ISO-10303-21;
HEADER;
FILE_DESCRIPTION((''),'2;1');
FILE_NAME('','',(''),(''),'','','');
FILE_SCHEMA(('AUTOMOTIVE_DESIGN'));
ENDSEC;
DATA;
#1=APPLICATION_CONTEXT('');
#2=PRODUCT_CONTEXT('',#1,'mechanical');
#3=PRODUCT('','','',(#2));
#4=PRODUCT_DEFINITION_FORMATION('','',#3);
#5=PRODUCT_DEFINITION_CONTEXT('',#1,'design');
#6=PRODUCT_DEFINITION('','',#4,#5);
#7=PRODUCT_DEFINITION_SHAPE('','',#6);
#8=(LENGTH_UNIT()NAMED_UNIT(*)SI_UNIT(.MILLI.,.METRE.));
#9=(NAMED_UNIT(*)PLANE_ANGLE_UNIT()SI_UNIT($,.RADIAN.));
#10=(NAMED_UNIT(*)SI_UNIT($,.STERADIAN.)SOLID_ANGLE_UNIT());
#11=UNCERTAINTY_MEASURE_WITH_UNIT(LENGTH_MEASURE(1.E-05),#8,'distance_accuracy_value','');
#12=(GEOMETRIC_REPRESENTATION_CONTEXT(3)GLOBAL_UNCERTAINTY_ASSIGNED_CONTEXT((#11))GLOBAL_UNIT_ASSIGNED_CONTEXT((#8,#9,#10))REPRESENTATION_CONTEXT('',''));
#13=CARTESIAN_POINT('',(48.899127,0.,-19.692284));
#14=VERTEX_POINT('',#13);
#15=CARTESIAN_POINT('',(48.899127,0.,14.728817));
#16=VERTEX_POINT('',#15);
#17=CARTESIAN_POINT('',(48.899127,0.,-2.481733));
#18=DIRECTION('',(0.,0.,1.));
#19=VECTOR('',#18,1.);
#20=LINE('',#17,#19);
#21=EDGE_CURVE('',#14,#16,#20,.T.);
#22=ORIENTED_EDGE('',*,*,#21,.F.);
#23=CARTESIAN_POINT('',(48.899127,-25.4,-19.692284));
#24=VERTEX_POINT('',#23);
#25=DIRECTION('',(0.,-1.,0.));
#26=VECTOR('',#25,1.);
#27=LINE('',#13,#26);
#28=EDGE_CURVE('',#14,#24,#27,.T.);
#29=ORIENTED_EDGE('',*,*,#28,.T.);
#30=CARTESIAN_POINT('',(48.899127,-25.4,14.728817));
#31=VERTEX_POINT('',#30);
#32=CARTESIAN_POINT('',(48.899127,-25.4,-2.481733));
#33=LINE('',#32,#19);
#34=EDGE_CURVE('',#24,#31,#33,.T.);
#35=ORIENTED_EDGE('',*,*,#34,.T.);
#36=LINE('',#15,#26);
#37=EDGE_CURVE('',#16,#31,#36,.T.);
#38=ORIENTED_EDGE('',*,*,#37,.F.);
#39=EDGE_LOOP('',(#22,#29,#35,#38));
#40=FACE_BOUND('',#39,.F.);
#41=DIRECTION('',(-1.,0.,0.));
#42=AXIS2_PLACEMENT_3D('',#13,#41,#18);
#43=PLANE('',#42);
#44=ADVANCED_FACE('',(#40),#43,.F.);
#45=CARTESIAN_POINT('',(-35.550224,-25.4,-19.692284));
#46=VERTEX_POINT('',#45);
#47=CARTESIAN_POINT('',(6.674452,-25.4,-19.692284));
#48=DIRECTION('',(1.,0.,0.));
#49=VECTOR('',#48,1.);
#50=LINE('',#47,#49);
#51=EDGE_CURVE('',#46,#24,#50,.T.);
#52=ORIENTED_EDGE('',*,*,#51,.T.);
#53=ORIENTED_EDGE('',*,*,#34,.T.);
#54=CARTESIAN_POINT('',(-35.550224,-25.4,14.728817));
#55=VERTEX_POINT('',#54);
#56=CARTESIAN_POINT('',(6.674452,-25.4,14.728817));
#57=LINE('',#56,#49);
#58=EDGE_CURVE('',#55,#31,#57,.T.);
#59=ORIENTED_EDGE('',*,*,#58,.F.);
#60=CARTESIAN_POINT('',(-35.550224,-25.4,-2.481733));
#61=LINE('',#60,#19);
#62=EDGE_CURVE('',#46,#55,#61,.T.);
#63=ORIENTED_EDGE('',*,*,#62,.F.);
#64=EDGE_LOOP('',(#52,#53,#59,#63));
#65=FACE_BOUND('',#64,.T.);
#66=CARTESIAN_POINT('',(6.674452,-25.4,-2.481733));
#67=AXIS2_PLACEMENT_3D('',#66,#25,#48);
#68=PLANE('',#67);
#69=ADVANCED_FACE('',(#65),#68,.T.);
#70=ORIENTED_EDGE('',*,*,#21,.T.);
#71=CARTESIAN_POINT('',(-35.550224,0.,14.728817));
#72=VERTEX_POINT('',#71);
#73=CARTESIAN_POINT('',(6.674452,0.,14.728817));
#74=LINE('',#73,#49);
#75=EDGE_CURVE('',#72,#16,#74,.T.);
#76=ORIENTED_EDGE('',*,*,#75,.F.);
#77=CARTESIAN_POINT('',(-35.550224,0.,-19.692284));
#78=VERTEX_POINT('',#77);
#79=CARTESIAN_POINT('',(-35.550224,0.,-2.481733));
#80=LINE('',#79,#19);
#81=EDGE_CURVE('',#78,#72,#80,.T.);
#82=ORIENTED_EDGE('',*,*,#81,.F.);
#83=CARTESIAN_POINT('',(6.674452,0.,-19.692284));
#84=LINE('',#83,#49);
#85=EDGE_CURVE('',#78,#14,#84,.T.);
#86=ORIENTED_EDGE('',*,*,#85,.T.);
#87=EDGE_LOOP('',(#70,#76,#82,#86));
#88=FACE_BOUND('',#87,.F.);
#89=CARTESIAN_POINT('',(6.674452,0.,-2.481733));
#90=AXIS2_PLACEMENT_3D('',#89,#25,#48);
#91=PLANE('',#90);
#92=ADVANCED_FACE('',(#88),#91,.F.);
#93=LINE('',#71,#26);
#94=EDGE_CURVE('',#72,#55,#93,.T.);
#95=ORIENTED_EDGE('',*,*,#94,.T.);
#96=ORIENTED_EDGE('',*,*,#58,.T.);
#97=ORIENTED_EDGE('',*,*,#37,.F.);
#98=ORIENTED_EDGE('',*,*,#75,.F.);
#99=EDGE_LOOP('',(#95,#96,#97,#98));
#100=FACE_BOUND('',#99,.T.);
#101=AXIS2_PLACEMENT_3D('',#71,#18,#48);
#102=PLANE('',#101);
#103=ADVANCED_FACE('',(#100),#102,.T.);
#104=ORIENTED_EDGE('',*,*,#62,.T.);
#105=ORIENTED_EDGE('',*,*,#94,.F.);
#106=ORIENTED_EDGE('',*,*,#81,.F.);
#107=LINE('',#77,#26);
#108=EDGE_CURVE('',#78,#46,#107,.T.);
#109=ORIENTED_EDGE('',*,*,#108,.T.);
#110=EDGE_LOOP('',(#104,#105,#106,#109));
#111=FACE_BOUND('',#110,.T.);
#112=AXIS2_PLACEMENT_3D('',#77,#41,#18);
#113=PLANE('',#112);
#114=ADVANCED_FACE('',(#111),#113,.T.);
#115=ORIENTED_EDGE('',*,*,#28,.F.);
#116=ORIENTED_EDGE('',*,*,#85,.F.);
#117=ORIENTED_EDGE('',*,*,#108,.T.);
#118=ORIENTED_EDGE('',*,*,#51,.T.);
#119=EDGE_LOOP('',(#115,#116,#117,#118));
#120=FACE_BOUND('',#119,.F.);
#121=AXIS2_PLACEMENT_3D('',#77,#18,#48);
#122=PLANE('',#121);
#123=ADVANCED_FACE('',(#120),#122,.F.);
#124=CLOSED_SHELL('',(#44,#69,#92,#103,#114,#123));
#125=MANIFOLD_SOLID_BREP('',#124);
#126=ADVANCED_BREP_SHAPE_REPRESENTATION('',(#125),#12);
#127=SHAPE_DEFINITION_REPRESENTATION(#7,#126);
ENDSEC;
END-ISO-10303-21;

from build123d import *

# Parameters (mm, degrees)
F0_W     = 84.4493508339
F0_H     = 34.4211012125
F1_DEPTH = 25.4


# Not quite as in the source:
# - a feature of the source that left no trace in its solid (it failed there, or was rolled back) is left out


with BuildPart() as f1:
    # F0 (on Front) → F1 (new body)
    with BuildSketch(Plane.XZ):
        with Locations((6.6744517535, -2.4817334488)):
            Rectangle(F0_W, F0_H)
    extrude(amount=F1_DEPTH)


solid = f1.part
